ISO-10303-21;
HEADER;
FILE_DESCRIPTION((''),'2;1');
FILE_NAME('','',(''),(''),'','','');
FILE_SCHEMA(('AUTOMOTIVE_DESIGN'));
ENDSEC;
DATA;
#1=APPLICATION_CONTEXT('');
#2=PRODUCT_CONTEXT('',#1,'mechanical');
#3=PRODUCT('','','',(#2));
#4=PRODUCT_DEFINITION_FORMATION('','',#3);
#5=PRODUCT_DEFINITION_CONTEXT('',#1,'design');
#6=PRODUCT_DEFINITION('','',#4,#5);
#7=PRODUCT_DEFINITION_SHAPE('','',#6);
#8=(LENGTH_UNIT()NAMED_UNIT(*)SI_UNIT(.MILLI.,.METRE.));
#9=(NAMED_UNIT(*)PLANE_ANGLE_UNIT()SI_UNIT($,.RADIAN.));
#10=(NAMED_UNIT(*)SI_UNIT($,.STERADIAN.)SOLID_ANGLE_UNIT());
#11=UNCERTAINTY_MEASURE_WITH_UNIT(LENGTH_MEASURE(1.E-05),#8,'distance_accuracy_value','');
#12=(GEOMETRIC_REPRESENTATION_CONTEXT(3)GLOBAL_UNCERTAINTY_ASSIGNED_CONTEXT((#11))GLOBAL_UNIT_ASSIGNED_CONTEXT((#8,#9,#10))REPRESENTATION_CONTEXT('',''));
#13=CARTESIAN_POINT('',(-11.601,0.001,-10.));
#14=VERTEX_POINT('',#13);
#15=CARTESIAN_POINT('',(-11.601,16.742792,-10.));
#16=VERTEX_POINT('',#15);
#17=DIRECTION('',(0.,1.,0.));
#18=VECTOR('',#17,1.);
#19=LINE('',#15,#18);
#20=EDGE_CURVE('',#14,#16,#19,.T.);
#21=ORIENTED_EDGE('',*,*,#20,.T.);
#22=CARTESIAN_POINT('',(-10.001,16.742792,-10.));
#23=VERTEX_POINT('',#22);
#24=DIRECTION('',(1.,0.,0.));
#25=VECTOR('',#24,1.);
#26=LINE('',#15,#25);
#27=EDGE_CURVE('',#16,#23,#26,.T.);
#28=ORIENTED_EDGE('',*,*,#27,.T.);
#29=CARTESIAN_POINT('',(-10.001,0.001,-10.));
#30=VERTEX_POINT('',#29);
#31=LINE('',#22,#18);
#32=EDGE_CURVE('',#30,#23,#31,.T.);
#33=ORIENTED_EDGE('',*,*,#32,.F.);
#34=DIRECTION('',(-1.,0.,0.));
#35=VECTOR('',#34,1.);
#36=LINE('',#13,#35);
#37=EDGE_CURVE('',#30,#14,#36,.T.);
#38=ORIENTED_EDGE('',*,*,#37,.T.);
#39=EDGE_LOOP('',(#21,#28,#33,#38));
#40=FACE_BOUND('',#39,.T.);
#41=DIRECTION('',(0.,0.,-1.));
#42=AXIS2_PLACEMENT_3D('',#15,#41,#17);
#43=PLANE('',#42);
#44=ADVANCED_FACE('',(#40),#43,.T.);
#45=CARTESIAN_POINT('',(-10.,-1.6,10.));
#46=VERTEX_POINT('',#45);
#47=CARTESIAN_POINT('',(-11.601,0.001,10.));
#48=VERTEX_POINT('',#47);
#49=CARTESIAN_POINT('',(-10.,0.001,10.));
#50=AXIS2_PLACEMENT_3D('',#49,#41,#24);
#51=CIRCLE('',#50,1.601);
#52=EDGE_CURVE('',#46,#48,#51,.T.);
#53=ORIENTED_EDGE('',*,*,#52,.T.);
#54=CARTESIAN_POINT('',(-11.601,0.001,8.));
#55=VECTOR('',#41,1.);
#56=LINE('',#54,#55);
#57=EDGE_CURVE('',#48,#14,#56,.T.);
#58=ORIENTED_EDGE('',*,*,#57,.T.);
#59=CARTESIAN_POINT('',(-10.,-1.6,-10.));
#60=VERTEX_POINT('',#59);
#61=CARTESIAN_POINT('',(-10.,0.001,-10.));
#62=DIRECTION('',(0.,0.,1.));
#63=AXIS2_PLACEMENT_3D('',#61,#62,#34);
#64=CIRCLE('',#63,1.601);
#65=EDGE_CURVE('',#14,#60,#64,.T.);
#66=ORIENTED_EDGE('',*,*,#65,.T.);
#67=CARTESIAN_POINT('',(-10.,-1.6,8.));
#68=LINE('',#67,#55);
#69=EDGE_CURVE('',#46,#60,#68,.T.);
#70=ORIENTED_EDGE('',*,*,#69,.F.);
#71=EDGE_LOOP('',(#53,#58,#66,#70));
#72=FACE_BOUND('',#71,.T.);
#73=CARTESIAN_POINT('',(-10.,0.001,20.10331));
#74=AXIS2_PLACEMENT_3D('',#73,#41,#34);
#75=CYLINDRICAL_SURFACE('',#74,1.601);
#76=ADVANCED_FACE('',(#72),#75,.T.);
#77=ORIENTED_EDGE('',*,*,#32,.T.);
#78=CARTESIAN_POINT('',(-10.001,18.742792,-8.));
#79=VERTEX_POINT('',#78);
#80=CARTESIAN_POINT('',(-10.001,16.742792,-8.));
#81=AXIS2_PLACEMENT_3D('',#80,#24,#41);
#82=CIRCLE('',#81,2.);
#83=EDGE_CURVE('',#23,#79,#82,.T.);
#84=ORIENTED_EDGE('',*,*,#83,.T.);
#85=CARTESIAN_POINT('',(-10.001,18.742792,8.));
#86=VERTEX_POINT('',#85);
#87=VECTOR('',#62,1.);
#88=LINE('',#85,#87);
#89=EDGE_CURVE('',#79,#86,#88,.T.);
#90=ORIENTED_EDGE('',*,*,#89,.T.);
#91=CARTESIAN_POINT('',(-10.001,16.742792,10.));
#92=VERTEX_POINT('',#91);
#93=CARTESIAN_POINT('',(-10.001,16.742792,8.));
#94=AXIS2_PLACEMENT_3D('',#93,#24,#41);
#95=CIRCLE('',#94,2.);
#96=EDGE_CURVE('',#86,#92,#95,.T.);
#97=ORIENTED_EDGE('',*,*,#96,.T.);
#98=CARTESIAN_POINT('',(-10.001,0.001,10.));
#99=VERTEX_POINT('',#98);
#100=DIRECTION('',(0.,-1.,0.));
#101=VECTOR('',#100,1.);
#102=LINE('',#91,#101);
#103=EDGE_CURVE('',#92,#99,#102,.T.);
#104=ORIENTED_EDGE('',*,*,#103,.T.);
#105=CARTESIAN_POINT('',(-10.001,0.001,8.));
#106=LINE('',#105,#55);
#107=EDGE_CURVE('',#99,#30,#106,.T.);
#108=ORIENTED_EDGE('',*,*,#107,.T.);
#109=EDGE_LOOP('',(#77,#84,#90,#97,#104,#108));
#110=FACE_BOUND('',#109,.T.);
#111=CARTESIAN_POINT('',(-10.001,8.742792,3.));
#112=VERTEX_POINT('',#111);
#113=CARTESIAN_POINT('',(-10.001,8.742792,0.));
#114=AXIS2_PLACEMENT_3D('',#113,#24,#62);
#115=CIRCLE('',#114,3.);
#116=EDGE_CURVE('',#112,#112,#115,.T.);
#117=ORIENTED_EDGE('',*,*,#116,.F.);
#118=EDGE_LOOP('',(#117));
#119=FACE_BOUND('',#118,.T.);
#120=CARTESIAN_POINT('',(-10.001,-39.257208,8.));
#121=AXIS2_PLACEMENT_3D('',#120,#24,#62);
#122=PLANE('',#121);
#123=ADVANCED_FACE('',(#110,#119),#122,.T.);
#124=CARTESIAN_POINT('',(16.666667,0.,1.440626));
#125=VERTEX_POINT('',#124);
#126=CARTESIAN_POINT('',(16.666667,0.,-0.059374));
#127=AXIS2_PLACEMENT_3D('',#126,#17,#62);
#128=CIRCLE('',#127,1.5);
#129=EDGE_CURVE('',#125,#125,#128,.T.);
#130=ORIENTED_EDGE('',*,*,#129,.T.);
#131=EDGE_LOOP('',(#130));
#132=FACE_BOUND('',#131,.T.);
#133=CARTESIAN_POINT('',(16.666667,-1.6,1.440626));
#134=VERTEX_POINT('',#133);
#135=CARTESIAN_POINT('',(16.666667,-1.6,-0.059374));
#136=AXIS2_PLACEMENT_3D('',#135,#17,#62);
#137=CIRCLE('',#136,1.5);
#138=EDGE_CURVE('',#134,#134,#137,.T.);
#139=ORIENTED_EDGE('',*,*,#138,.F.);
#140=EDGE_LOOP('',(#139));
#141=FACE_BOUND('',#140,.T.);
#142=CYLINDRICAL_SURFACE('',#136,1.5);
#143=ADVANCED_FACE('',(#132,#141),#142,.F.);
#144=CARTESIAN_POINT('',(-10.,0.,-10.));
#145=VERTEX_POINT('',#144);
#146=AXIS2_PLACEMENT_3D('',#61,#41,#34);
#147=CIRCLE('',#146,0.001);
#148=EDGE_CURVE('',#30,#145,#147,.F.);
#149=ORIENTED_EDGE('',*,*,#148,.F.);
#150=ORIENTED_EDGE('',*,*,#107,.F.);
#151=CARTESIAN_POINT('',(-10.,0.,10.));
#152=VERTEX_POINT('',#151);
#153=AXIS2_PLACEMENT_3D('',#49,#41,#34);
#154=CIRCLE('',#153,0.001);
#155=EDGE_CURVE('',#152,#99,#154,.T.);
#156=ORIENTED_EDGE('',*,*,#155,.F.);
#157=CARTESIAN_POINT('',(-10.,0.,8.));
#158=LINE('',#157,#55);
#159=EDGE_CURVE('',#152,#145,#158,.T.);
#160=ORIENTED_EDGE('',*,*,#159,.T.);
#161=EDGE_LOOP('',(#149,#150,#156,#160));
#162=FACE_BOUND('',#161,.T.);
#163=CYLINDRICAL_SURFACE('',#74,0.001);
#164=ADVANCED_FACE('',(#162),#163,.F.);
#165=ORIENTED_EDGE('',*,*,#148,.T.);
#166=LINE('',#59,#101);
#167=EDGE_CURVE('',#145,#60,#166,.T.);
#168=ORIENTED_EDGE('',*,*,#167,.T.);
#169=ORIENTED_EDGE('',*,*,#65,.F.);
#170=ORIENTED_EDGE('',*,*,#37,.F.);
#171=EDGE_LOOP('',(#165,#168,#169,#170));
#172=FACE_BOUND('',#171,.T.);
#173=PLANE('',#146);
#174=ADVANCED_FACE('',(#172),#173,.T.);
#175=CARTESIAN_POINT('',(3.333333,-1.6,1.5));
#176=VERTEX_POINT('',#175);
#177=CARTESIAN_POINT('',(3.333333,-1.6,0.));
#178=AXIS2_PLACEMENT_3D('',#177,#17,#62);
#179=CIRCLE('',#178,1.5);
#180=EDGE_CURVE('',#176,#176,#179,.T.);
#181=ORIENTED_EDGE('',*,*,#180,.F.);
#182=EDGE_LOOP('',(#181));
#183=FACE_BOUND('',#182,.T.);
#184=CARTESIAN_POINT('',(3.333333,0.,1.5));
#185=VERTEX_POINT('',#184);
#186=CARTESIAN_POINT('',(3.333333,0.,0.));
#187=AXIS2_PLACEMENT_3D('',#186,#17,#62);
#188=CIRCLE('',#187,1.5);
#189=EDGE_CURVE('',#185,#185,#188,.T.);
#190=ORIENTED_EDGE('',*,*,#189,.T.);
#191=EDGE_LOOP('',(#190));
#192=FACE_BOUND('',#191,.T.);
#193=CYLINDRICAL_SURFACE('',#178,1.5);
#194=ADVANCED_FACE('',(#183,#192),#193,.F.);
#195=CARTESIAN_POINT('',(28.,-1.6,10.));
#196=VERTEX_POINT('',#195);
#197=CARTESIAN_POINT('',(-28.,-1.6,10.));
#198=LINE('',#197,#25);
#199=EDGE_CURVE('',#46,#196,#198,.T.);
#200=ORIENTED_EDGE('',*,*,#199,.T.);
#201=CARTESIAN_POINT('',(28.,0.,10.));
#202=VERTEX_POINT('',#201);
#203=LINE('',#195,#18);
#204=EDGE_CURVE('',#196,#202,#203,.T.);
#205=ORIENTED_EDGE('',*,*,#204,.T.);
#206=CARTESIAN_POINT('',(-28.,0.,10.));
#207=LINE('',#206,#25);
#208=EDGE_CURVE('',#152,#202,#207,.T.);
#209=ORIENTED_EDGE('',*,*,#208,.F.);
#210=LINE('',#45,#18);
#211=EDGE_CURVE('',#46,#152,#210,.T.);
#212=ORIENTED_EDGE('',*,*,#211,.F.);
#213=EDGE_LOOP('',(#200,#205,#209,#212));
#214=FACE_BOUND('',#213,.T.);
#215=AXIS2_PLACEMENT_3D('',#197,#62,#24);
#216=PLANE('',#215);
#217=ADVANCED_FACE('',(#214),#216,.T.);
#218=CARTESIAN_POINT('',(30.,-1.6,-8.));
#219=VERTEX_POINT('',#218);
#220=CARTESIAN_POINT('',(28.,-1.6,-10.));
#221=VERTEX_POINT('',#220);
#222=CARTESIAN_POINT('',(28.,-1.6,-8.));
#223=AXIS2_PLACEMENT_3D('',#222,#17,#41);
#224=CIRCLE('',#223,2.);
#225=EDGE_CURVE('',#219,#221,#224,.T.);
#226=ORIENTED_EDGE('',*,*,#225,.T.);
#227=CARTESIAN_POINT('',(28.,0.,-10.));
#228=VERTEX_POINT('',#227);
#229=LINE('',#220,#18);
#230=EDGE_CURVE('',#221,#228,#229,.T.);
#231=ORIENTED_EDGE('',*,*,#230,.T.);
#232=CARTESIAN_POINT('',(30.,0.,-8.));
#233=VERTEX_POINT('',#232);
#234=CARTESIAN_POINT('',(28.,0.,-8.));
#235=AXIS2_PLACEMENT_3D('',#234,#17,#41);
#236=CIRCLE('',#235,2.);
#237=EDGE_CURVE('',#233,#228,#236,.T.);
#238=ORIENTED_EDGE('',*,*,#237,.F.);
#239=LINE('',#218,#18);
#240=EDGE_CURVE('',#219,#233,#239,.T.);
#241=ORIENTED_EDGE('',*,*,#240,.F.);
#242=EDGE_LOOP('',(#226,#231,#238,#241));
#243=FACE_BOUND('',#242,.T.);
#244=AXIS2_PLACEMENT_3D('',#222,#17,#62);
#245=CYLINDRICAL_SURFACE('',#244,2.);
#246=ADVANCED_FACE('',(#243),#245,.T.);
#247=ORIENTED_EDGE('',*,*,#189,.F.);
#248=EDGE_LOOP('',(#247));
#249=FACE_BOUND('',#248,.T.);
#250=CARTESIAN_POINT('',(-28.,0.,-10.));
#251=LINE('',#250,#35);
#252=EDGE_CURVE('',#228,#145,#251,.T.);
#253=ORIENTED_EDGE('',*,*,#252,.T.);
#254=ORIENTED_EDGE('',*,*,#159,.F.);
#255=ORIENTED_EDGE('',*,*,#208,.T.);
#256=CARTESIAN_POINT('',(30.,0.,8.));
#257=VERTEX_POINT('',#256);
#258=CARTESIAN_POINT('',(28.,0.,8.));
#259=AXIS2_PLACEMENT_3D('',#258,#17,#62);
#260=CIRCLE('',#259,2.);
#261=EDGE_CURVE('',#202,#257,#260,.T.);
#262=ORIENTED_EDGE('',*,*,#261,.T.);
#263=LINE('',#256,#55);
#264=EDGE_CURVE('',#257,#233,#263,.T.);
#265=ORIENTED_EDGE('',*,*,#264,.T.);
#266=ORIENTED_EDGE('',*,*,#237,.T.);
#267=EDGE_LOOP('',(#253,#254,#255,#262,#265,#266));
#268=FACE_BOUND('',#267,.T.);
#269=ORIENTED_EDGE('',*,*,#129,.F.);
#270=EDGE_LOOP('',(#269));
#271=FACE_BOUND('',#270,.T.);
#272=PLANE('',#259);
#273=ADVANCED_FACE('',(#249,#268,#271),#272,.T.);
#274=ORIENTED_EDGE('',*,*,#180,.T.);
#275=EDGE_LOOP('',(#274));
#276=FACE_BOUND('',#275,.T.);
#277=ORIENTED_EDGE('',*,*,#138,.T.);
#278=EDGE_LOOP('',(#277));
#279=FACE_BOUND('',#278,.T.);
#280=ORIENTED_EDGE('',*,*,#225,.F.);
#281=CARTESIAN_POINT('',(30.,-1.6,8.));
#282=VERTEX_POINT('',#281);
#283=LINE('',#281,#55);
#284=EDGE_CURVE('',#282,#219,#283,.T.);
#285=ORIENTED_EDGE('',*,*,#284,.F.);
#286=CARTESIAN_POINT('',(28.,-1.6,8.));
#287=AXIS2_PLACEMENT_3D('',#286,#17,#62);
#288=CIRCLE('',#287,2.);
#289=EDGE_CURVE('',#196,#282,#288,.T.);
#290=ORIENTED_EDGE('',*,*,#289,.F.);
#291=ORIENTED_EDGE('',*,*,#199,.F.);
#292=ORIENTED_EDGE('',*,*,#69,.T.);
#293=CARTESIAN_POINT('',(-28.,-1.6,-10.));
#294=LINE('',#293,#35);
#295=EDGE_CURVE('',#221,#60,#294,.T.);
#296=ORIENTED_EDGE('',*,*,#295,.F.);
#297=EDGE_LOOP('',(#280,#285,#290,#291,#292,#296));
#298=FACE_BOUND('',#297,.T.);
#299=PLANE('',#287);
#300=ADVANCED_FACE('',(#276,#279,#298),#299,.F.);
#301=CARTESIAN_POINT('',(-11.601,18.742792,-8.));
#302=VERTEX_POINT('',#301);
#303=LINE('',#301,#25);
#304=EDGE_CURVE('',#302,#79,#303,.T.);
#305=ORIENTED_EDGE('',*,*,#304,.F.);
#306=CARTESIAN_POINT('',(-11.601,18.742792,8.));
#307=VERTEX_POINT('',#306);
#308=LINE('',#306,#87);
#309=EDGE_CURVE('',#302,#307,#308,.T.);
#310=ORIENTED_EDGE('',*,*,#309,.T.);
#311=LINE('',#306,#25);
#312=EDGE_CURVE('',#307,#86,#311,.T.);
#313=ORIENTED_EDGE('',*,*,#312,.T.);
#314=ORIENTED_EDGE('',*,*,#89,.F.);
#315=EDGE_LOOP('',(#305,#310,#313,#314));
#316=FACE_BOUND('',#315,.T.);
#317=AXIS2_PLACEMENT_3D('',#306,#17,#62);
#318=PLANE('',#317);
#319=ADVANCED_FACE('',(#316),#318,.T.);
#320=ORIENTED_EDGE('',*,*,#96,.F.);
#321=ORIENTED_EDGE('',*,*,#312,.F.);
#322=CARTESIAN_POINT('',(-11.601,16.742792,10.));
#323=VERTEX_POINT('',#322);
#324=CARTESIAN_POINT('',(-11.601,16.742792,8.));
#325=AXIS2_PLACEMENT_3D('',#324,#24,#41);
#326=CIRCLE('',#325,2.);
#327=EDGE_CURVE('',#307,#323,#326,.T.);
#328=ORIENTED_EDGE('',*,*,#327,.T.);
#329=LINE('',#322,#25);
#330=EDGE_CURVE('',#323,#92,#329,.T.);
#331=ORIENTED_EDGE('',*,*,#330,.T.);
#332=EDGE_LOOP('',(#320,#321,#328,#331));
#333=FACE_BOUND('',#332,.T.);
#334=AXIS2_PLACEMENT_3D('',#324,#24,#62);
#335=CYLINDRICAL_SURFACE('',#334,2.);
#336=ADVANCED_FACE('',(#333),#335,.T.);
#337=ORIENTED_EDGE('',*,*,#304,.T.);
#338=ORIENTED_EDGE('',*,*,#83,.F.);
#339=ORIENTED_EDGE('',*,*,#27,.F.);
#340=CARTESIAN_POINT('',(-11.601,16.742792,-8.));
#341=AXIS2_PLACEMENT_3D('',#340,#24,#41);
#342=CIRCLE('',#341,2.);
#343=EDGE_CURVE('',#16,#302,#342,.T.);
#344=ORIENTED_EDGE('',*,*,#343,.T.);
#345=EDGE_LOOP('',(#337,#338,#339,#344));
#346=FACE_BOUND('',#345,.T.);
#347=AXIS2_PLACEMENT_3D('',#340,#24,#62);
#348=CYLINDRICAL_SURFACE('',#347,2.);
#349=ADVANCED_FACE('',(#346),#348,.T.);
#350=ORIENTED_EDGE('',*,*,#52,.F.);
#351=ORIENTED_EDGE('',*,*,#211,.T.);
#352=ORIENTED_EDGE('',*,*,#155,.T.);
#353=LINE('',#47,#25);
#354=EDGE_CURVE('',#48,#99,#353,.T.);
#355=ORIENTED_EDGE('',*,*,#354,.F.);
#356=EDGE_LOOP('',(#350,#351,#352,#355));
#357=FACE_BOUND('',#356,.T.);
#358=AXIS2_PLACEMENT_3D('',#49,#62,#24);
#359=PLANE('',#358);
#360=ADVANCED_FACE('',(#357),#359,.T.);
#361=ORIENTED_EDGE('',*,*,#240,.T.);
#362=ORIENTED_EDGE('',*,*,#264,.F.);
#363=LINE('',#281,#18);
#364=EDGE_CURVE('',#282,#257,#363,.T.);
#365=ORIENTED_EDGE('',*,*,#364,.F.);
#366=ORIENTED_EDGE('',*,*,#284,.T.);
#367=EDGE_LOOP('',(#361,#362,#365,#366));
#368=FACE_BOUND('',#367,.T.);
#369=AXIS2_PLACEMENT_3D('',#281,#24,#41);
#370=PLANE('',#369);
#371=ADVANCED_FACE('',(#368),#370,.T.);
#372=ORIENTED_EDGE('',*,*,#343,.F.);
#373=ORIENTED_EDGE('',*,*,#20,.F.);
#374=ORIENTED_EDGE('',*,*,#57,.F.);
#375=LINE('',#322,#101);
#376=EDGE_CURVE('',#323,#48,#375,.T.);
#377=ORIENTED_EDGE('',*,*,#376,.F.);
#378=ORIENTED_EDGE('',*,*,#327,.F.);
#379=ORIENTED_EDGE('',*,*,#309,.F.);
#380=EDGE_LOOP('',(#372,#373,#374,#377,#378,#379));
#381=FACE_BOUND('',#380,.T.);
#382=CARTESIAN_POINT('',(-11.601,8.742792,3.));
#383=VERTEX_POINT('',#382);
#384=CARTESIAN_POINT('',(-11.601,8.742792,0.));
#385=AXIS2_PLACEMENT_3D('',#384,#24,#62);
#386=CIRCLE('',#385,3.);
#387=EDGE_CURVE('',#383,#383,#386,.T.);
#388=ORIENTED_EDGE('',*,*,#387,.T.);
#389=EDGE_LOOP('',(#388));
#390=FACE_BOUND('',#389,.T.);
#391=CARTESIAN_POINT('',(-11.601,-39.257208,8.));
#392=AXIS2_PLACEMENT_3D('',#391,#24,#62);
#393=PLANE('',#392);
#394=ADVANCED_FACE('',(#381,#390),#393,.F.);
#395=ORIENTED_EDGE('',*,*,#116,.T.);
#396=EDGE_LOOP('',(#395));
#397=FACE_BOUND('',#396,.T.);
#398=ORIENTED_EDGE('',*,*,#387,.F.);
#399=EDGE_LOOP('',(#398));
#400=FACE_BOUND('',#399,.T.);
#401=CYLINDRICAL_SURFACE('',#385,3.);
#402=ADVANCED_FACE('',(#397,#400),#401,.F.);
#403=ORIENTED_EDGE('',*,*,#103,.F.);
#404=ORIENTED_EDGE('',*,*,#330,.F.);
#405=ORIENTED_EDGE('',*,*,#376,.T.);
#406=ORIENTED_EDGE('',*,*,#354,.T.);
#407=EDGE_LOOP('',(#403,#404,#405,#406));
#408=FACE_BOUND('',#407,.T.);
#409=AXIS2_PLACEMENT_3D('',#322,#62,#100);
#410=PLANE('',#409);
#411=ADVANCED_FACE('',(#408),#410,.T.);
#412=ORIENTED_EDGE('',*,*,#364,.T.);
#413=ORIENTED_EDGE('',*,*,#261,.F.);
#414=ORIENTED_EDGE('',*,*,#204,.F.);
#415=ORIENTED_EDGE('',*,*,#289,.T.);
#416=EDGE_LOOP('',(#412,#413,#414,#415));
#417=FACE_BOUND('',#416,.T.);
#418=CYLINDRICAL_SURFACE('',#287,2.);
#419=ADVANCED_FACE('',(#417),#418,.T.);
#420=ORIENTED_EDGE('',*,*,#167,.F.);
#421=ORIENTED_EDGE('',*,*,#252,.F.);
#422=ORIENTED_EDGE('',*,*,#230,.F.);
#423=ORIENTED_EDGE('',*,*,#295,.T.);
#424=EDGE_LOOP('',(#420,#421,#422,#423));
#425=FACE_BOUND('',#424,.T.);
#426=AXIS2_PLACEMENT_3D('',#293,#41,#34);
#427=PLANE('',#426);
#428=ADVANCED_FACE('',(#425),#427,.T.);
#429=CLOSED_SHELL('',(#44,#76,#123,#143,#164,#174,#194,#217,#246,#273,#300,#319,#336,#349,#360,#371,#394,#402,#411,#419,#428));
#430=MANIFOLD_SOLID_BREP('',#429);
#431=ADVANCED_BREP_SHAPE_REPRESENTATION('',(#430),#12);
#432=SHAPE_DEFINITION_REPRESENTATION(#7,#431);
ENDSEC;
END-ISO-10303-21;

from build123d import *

# Parameters (mm, degrees)
SKETCH1_R                  = 3
SKETCH1_R_2                = 1.5
BASE_FLANGE1_DEPTH         = 1.6
SKETCHED_START             = -30
SKETCHED_BEND1_OUTLINE_W   = 1.6
SKETCHED_BEND1_OUTLINE_H   = 20
SKETCHED_BEND1_DEPTH       = 18.399
SKETCHED_START_2           = -11.601
SKETCHED_BEND1_2_OUTLINE_R = 3
SKETCHED_BEND1_2_DEPTH     = 1.6
SKETCHED_START_3           = -11
SKETCHED_BEND1_3_DEPTH     = 22
SKETCHED_START_4           = -10
SKETCHED_BEND1_4_DEPTH     = 20


with BuildPart() as part:
    # Base-Flange1: sheet metal written as solids
    # Sketch1 → Base-Flange1 (new body)
    with BuildSketch(Plane(origin=(0, 0, 0), x_dir=(1, 0, 0), z_dir=(0, 1, 0))):
        with BuildLine():
            Line((-28, -10), (28, -10))
            ThreePointArc((28, -10), (29.414213562, -9.414213562), (30, -8))
            Line((30, -8), (30, 8))
            ThreePointArc((30, 8), (29.414213562, 9.414213562), (28, 10))
            Line((28, 10), (-28, 10))
            ThreePointArc((-28, 10), (-29.414213562, 9.414213562), (-30, 8))
            Line((-30, 8), (-30, -8))
            ThreePointArc((-30, -8), (-29.414213562, -9.414213562), (-28, -10))
        make_face()
        with Locations(Location((-20, 0, 0), (0, 0, 270))):
            Circle(SKETCH1_R, mode=Mode.SUBTRACT)
        with Locations(Location((16.666666667, 0.059373734, 0), (0, 0, 270))):
            Circle(SKETCH1_R_2, mode=Mode.SUBTRACT)
        with Locations(Location((3.333333333, 0, 0), (0, 0, 270))):
            Circle(SKETCH1_R_2, mode=Mode.SUBTRACT)
    extrude(amount=-BASE_FLANGE1_DEPTH)

    # Sketched Bend1: read off the stored shape, not the designer's step
    # Sketched Bend1 outline → Sketched Bend1 (cut)
    with BuildSketch(Plane.YZ.offset(SKETCHED_START)):
        with Locations((-0.8, 0)):
            Rectangle(SKETCHED_BEND1_OUTLINE_W, SKETCHED_BEND1_OUTLINE_H)
    extrude(amount=SKETCHED_BEND1_DEPTH, mode=Mode.SUBTRACT)

    # Sketched Bend1 2 outline → Sketched Bend1 2 (add)
    with BuildSketch(Plane.YZ.offset(SKETCHED_START_2)):
        with BuildLine():
            ThreePointArc((18.742792142, 8), (18.157005705, 9.414213563), (16.742792142, 10))
            Line((16.742792142, 10), (0, 10))
            Line((0, 10), (0, -10))
            Line((0, -10), (16.742792142, -10))
            ThreePointArc((16.742792142, -10), (18.157005705, -9.414213563), (18.742792142, -8))
            Line((18.742792142, -8), (18.742792142, 8))
        make_face()
        with Locations((8.742792142, 0)):
            Circle(SKETCHED_BEND1_2_OUTLINE_R, mode=Mode.SUBTRACT)
    extrude(amount=SKETCHED_BEND1_2_DEPTH)

    # Sketched Bend1 3 outline → Sketched Bend1 3 (cut)
    with BuildSketch(Plane.XY.offset(SKETCHED_START_3)):
        with BuildLine():
            Line((-11.601, -1.6), (-10, -1.6))
            ThreePointArc((-10, -1.6), (-11.132077957, -1.131077957), (-11.601, 0.001))
            Line((-11.601, 0.001), (-11.601, -1.6))
        make_face()
    extrude(amount=SKETCHED_BEND1_3_DEPTH, mode=Mode.SUBTRACT)

    # Sketched Bend1 4 outline → Sketched Bend1 4 (add)
    with BuildSketch(Plane.XY.offset(SKETCHED_START_4)):
        with BuildLine():
            Line((-10.001, 0), (-10, 0))
            ThreePointArc((-10, 0), (-10.000707107, 0.000292893), (-10.001, 0.001))
            Line((-10.001, 0.001), (-10.001, 0))
        make_face()
    extrude(amount=SKETCHED_BEND1_4_DEPTH)


solid = part.part
